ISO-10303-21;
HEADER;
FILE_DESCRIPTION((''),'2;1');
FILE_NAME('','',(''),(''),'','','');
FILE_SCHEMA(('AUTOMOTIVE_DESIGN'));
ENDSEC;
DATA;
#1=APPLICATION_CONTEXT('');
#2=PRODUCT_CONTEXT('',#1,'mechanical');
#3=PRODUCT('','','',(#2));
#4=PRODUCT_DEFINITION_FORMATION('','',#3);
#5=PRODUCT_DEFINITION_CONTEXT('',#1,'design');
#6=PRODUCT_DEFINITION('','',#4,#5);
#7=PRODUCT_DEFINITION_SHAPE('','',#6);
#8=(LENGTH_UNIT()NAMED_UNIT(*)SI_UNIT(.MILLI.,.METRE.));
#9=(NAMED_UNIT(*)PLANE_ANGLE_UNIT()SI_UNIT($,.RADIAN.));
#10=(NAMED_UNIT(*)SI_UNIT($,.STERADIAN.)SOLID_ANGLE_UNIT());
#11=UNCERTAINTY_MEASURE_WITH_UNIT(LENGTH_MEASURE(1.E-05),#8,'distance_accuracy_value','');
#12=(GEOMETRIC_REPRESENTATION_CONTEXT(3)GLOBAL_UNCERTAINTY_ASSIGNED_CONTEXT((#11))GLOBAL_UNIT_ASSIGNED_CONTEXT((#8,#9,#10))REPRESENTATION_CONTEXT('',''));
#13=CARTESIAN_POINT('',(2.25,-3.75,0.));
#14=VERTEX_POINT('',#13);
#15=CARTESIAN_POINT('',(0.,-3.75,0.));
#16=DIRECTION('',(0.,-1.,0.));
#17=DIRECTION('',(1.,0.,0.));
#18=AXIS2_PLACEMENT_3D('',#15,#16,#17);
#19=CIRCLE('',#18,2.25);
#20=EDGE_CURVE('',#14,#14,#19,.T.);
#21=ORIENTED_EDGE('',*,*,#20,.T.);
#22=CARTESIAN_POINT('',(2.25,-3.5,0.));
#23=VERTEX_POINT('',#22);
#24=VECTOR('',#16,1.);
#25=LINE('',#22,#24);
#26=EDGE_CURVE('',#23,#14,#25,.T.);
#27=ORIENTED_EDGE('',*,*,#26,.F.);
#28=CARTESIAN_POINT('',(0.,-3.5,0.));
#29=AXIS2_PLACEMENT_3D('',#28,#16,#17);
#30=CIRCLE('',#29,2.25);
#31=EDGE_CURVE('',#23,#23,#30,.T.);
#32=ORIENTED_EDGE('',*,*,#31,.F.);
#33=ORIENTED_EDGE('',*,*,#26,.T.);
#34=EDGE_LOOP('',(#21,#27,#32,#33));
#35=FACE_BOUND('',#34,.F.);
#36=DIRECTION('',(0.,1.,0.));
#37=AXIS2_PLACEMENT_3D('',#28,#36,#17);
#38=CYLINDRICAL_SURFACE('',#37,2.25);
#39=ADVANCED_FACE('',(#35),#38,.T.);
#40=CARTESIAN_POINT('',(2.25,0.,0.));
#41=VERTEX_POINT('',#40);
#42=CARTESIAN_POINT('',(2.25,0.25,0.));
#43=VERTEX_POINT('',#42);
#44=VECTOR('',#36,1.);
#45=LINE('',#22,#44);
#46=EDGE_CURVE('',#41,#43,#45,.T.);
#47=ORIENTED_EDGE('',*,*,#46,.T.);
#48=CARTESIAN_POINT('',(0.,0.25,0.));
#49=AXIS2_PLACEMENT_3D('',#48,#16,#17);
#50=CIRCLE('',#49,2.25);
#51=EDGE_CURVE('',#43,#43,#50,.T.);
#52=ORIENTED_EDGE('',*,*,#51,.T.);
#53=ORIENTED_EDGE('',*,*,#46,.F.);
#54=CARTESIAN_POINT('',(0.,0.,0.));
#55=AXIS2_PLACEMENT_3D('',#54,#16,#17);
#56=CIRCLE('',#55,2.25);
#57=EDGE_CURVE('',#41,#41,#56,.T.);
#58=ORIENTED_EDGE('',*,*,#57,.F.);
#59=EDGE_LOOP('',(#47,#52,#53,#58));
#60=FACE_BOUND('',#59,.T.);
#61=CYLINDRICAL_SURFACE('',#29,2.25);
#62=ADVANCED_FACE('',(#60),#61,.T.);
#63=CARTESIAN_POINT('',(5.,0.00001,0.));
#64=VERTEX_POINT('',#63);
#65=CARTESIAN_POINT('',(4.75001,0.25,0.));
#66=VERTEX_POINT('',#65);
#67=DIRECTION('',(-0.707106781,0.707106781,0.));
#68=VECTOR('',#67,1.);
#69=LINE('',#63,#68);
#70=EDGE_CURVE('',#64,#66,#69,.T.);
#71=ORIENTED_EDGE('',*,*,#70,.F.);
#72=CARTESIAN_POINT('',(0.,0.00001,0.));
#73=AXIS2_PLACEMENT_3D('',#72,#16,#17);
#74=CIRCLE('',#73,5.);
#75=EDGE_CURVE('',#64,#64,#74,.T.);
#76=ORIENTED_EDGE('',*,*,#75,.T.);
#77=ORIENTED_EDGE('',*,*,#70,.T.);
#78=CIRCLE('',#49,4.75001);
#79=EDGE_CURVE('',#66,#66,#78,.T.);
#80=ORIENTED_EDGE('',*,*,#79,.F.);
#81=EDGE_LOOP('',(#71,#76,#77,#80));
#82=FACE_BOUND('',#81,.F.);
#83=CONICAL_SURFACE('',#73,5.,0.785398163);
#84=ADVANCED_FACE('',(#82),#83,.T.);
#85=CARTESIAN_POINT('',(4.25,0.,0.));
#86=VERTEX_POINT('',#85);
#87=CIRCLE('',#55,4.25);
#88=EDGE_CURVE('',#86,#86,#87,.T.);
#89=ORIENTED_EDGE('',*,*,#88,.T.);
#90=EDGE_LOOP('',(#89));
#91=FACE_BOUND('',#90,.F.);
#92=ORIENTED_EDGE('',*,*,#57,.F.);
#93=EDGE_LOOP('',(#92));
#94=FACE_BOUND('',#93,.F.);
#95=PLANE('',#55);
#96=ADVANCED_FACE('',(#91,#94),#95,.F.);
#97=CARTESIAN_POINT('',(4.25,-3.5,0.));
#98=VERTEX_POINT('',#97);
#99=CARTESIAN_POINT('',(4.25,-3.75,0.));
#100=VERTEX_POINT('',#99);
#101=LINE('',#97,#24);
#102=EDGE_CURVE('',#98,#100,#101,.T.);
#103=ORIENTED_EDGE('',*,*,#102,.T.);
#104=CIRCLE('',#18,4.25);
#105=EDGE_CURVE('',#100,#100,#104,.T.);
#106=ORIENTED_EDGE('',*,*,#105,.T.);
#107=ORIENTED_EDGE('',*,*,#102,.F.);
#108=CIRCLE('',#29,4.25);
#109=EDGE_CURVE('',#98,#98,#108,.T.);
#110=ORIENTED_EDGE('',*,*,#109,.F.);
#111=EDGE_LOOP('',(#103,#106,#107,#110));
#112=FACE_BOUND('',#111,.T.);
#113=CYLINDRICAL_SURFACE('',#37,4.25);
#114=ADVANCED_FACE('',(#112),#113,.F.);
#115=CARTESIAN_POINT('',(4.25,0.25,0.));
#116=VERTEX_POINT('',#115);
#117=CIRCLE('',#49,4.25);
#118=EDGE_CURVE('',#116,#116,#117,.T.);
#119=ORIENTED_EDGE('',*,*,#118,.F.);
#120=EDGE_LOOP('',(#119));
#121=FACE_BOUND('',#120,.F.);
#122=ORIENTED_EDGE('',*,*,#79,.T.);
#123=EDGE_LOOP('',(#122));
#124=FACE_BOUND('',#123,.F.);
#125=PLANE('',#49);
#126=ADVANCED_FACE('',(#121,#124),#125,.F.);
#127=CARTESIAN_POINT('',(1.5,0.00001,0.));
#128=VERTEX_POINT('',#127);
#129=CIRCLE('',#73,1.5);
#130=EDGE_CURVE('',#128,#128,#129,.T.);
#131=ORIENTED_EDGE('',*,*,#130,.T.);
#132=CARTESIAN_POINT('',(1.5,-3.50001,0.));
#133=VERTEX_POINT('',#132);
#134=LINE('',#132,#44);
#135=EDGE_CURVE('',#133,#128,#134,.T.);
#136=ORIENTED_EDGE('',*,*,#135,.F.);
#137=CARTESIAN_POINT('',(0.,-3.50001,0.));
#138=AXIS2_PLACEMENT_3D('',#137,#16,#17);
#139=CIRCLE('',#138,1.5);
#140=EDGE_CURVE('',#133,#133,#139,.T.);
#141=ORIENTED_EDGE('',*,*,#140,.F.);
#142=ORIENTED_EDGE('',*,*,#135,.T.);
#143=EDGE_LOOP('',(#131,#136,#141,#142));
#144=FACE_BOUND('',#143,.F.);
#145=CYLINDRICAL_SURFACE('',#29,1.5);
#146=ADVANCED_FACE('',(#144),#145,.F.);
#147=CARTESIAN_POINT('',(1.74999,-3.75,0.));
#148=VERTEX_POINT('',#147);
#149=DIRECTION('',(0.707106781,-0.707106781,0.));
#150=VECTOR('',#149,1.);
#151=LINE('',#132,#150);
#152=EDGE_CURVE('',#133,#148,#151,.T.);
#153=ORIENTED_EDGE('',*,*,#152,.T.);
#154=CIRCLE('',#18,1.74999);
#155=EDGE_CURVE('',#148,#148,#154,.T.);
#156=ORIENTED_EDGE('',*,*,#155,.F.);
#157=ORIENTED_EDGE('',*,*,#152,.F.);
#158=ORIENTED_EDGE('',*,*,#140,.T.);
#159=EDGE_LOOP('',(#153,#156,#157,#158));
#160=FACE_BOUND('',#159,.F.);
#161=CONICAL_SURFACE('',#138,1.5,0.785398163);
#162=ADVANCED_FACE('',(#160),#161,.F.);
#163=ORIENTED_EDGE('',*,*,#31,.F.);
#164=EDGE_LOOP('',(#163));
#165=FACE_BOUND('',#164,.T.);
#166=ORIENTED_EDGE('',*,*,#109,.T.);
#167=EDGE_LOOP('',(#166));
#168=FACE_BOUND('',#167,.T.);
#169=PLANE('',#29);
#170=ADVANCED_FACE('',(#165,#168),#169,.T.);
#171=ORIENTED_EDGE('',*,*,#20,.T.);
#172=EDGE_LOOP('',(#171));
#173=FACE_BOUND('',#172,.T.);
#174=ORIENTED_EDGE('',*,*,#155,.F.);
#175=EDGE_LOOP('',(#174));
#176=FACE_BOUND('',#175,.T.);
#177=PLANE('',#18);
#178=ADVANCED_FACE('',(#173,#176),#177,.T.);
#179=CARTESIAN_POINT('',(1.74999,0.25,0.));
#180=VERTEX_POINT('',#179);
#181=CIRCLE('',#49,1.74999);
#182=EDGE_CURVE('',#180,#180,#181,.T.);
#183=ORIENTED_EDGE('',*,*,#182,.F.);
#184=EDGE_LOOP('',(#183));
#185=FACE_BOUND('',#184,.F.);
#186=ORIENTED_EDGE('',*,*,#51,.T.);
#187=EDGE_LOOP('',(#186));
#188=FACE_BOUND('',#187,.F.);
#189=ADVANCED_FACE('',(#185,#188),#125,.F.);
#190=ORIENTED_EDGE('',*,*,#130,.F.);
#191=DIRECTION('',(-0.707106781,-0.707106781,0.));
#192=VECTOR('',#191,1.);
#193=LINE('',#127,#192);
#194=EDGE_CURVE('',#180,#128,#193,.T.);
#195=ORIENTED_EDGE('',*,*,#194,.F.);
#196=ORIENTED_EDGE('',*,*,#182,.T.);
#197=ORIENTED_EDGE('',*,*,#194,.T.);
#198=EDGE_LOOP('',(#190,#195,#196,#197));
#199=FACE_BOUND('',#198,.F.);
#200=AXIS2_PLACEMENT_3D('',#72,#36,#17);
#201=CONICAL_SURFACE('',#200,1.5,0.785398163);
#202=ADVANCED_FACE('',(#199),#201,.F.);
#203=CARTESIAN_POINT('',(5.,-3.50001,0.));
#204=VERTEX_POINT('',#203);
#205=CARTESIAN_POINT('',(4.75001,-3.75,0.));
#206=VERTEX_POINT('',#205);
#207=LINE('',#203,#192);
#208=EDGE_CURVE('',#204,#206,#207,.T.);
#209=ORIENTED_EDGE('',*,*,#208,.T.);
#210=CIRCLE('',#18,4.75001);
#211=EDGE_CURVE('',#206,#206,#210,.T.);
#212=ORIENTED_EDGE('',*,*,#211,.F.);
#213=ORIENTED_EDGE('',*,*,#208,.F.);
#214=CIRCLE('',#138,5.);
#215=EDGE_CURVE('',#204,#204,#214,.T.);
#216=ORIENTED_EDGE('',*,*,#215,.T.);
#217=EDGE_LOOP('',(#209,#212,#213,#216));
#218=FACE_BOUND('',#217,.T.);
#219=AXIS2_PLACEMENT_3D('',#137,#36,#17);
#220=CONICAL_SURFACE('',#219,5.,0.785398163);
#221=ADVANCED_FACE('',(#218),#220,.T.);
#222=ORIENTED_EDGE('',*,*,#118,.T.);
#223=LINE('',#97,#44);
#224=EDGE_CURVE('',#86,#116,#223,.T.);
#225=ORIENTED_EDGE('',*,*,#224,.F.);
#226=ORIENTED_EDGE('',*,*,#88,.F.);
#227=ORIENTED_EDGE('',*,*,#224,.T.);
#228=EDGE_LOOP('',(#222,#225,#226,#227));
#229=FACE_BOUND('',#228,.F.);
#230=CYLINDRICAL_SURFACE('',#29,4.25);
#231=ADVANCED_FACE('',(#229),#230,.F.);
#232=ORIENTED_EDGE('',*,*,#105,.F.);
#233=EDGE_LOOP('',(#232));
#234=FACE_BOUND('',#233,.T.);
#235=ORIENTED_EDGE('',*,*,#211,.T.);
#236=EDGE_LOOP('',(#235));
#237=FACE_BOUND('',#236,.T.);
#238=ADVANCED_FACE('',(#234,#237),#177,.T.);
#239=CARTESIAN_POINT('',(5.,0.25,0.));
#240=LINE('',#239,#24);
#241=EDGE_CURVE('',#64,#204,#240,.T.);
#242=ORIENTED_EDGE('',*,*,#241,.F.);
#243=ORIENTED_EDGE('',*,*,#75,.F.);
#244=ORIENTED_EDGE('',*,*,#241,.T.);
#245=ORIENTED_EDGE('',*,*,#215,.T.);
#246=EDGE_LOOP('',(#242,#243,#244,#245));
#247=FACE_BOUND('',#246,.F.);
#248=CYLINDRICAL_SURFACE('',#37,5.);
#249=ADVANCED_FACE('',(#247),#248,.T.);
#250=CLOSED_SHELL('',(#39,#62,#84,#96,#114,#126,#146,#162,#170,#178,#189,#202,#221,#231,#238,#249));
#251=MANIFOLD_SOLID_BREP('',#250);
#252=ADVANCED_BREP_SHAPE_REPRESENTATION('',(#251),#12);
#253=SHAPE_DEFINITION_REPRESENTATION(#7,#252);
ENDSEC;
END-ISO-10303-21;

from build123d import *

# Parameters (mm, degrees)
F0_R          = 5
F0_R_2        = 1.5
F1_DEPTH      = 3.5
F2_R          = 5
F2_R_2        = 4.25
F2_R_3        = 2.25
F2_R_4        = 1.5
F3_DEPTH      = 0.25
F3_DEPTH_BACK = 3.75
F4_SIZE       = 0.24999


# Not quite as in the source:
# - a fillet or chamfer is up to 0.001 mm smaller than in the source, because OpenCascade refuses the exact size


with BuildPart() as f1:
    # F0 (on Front) → F1 (new body)
    with BuildSketch(Plane.XZ):
        Circle(F0_R)
        Circle(F0_R_2, mode=Mode.SUBTRACT)
    extrude(amount=F1_DEPTH)

    # F2 (on face) → F3 (join, two sides)
    with BuildSketch(Plane.XZ.offset(3.5)) as f3_sk:
        Circle(F2_R)
        Circle(F2_R_2, mode=Mode.SUBTRACT)
        Circle(F2_R_3)
        Circle(F2_R_4, mode=Mode.SUBTRACT)
    extrude(amount=F3_DEPTH)
    extrude(f3_sk.sketch, amount=-F3_DEPTH_BACK)

    # F4 (size 0.25 in the source; OpenCascade refuses exactly that, so slightly less here)
    f4_edges = [f1.edges().sort_by_distance(p)[0] for p in [
        (-5, -3.75, 0),
        (-1.5, -3.75, 0),
        (-1.5, 0.25, 0),
        (-5, 0.25, 0),
    ]]
    chamfer(f4_edges, length=F4_SIZE)


solid = f1.part
